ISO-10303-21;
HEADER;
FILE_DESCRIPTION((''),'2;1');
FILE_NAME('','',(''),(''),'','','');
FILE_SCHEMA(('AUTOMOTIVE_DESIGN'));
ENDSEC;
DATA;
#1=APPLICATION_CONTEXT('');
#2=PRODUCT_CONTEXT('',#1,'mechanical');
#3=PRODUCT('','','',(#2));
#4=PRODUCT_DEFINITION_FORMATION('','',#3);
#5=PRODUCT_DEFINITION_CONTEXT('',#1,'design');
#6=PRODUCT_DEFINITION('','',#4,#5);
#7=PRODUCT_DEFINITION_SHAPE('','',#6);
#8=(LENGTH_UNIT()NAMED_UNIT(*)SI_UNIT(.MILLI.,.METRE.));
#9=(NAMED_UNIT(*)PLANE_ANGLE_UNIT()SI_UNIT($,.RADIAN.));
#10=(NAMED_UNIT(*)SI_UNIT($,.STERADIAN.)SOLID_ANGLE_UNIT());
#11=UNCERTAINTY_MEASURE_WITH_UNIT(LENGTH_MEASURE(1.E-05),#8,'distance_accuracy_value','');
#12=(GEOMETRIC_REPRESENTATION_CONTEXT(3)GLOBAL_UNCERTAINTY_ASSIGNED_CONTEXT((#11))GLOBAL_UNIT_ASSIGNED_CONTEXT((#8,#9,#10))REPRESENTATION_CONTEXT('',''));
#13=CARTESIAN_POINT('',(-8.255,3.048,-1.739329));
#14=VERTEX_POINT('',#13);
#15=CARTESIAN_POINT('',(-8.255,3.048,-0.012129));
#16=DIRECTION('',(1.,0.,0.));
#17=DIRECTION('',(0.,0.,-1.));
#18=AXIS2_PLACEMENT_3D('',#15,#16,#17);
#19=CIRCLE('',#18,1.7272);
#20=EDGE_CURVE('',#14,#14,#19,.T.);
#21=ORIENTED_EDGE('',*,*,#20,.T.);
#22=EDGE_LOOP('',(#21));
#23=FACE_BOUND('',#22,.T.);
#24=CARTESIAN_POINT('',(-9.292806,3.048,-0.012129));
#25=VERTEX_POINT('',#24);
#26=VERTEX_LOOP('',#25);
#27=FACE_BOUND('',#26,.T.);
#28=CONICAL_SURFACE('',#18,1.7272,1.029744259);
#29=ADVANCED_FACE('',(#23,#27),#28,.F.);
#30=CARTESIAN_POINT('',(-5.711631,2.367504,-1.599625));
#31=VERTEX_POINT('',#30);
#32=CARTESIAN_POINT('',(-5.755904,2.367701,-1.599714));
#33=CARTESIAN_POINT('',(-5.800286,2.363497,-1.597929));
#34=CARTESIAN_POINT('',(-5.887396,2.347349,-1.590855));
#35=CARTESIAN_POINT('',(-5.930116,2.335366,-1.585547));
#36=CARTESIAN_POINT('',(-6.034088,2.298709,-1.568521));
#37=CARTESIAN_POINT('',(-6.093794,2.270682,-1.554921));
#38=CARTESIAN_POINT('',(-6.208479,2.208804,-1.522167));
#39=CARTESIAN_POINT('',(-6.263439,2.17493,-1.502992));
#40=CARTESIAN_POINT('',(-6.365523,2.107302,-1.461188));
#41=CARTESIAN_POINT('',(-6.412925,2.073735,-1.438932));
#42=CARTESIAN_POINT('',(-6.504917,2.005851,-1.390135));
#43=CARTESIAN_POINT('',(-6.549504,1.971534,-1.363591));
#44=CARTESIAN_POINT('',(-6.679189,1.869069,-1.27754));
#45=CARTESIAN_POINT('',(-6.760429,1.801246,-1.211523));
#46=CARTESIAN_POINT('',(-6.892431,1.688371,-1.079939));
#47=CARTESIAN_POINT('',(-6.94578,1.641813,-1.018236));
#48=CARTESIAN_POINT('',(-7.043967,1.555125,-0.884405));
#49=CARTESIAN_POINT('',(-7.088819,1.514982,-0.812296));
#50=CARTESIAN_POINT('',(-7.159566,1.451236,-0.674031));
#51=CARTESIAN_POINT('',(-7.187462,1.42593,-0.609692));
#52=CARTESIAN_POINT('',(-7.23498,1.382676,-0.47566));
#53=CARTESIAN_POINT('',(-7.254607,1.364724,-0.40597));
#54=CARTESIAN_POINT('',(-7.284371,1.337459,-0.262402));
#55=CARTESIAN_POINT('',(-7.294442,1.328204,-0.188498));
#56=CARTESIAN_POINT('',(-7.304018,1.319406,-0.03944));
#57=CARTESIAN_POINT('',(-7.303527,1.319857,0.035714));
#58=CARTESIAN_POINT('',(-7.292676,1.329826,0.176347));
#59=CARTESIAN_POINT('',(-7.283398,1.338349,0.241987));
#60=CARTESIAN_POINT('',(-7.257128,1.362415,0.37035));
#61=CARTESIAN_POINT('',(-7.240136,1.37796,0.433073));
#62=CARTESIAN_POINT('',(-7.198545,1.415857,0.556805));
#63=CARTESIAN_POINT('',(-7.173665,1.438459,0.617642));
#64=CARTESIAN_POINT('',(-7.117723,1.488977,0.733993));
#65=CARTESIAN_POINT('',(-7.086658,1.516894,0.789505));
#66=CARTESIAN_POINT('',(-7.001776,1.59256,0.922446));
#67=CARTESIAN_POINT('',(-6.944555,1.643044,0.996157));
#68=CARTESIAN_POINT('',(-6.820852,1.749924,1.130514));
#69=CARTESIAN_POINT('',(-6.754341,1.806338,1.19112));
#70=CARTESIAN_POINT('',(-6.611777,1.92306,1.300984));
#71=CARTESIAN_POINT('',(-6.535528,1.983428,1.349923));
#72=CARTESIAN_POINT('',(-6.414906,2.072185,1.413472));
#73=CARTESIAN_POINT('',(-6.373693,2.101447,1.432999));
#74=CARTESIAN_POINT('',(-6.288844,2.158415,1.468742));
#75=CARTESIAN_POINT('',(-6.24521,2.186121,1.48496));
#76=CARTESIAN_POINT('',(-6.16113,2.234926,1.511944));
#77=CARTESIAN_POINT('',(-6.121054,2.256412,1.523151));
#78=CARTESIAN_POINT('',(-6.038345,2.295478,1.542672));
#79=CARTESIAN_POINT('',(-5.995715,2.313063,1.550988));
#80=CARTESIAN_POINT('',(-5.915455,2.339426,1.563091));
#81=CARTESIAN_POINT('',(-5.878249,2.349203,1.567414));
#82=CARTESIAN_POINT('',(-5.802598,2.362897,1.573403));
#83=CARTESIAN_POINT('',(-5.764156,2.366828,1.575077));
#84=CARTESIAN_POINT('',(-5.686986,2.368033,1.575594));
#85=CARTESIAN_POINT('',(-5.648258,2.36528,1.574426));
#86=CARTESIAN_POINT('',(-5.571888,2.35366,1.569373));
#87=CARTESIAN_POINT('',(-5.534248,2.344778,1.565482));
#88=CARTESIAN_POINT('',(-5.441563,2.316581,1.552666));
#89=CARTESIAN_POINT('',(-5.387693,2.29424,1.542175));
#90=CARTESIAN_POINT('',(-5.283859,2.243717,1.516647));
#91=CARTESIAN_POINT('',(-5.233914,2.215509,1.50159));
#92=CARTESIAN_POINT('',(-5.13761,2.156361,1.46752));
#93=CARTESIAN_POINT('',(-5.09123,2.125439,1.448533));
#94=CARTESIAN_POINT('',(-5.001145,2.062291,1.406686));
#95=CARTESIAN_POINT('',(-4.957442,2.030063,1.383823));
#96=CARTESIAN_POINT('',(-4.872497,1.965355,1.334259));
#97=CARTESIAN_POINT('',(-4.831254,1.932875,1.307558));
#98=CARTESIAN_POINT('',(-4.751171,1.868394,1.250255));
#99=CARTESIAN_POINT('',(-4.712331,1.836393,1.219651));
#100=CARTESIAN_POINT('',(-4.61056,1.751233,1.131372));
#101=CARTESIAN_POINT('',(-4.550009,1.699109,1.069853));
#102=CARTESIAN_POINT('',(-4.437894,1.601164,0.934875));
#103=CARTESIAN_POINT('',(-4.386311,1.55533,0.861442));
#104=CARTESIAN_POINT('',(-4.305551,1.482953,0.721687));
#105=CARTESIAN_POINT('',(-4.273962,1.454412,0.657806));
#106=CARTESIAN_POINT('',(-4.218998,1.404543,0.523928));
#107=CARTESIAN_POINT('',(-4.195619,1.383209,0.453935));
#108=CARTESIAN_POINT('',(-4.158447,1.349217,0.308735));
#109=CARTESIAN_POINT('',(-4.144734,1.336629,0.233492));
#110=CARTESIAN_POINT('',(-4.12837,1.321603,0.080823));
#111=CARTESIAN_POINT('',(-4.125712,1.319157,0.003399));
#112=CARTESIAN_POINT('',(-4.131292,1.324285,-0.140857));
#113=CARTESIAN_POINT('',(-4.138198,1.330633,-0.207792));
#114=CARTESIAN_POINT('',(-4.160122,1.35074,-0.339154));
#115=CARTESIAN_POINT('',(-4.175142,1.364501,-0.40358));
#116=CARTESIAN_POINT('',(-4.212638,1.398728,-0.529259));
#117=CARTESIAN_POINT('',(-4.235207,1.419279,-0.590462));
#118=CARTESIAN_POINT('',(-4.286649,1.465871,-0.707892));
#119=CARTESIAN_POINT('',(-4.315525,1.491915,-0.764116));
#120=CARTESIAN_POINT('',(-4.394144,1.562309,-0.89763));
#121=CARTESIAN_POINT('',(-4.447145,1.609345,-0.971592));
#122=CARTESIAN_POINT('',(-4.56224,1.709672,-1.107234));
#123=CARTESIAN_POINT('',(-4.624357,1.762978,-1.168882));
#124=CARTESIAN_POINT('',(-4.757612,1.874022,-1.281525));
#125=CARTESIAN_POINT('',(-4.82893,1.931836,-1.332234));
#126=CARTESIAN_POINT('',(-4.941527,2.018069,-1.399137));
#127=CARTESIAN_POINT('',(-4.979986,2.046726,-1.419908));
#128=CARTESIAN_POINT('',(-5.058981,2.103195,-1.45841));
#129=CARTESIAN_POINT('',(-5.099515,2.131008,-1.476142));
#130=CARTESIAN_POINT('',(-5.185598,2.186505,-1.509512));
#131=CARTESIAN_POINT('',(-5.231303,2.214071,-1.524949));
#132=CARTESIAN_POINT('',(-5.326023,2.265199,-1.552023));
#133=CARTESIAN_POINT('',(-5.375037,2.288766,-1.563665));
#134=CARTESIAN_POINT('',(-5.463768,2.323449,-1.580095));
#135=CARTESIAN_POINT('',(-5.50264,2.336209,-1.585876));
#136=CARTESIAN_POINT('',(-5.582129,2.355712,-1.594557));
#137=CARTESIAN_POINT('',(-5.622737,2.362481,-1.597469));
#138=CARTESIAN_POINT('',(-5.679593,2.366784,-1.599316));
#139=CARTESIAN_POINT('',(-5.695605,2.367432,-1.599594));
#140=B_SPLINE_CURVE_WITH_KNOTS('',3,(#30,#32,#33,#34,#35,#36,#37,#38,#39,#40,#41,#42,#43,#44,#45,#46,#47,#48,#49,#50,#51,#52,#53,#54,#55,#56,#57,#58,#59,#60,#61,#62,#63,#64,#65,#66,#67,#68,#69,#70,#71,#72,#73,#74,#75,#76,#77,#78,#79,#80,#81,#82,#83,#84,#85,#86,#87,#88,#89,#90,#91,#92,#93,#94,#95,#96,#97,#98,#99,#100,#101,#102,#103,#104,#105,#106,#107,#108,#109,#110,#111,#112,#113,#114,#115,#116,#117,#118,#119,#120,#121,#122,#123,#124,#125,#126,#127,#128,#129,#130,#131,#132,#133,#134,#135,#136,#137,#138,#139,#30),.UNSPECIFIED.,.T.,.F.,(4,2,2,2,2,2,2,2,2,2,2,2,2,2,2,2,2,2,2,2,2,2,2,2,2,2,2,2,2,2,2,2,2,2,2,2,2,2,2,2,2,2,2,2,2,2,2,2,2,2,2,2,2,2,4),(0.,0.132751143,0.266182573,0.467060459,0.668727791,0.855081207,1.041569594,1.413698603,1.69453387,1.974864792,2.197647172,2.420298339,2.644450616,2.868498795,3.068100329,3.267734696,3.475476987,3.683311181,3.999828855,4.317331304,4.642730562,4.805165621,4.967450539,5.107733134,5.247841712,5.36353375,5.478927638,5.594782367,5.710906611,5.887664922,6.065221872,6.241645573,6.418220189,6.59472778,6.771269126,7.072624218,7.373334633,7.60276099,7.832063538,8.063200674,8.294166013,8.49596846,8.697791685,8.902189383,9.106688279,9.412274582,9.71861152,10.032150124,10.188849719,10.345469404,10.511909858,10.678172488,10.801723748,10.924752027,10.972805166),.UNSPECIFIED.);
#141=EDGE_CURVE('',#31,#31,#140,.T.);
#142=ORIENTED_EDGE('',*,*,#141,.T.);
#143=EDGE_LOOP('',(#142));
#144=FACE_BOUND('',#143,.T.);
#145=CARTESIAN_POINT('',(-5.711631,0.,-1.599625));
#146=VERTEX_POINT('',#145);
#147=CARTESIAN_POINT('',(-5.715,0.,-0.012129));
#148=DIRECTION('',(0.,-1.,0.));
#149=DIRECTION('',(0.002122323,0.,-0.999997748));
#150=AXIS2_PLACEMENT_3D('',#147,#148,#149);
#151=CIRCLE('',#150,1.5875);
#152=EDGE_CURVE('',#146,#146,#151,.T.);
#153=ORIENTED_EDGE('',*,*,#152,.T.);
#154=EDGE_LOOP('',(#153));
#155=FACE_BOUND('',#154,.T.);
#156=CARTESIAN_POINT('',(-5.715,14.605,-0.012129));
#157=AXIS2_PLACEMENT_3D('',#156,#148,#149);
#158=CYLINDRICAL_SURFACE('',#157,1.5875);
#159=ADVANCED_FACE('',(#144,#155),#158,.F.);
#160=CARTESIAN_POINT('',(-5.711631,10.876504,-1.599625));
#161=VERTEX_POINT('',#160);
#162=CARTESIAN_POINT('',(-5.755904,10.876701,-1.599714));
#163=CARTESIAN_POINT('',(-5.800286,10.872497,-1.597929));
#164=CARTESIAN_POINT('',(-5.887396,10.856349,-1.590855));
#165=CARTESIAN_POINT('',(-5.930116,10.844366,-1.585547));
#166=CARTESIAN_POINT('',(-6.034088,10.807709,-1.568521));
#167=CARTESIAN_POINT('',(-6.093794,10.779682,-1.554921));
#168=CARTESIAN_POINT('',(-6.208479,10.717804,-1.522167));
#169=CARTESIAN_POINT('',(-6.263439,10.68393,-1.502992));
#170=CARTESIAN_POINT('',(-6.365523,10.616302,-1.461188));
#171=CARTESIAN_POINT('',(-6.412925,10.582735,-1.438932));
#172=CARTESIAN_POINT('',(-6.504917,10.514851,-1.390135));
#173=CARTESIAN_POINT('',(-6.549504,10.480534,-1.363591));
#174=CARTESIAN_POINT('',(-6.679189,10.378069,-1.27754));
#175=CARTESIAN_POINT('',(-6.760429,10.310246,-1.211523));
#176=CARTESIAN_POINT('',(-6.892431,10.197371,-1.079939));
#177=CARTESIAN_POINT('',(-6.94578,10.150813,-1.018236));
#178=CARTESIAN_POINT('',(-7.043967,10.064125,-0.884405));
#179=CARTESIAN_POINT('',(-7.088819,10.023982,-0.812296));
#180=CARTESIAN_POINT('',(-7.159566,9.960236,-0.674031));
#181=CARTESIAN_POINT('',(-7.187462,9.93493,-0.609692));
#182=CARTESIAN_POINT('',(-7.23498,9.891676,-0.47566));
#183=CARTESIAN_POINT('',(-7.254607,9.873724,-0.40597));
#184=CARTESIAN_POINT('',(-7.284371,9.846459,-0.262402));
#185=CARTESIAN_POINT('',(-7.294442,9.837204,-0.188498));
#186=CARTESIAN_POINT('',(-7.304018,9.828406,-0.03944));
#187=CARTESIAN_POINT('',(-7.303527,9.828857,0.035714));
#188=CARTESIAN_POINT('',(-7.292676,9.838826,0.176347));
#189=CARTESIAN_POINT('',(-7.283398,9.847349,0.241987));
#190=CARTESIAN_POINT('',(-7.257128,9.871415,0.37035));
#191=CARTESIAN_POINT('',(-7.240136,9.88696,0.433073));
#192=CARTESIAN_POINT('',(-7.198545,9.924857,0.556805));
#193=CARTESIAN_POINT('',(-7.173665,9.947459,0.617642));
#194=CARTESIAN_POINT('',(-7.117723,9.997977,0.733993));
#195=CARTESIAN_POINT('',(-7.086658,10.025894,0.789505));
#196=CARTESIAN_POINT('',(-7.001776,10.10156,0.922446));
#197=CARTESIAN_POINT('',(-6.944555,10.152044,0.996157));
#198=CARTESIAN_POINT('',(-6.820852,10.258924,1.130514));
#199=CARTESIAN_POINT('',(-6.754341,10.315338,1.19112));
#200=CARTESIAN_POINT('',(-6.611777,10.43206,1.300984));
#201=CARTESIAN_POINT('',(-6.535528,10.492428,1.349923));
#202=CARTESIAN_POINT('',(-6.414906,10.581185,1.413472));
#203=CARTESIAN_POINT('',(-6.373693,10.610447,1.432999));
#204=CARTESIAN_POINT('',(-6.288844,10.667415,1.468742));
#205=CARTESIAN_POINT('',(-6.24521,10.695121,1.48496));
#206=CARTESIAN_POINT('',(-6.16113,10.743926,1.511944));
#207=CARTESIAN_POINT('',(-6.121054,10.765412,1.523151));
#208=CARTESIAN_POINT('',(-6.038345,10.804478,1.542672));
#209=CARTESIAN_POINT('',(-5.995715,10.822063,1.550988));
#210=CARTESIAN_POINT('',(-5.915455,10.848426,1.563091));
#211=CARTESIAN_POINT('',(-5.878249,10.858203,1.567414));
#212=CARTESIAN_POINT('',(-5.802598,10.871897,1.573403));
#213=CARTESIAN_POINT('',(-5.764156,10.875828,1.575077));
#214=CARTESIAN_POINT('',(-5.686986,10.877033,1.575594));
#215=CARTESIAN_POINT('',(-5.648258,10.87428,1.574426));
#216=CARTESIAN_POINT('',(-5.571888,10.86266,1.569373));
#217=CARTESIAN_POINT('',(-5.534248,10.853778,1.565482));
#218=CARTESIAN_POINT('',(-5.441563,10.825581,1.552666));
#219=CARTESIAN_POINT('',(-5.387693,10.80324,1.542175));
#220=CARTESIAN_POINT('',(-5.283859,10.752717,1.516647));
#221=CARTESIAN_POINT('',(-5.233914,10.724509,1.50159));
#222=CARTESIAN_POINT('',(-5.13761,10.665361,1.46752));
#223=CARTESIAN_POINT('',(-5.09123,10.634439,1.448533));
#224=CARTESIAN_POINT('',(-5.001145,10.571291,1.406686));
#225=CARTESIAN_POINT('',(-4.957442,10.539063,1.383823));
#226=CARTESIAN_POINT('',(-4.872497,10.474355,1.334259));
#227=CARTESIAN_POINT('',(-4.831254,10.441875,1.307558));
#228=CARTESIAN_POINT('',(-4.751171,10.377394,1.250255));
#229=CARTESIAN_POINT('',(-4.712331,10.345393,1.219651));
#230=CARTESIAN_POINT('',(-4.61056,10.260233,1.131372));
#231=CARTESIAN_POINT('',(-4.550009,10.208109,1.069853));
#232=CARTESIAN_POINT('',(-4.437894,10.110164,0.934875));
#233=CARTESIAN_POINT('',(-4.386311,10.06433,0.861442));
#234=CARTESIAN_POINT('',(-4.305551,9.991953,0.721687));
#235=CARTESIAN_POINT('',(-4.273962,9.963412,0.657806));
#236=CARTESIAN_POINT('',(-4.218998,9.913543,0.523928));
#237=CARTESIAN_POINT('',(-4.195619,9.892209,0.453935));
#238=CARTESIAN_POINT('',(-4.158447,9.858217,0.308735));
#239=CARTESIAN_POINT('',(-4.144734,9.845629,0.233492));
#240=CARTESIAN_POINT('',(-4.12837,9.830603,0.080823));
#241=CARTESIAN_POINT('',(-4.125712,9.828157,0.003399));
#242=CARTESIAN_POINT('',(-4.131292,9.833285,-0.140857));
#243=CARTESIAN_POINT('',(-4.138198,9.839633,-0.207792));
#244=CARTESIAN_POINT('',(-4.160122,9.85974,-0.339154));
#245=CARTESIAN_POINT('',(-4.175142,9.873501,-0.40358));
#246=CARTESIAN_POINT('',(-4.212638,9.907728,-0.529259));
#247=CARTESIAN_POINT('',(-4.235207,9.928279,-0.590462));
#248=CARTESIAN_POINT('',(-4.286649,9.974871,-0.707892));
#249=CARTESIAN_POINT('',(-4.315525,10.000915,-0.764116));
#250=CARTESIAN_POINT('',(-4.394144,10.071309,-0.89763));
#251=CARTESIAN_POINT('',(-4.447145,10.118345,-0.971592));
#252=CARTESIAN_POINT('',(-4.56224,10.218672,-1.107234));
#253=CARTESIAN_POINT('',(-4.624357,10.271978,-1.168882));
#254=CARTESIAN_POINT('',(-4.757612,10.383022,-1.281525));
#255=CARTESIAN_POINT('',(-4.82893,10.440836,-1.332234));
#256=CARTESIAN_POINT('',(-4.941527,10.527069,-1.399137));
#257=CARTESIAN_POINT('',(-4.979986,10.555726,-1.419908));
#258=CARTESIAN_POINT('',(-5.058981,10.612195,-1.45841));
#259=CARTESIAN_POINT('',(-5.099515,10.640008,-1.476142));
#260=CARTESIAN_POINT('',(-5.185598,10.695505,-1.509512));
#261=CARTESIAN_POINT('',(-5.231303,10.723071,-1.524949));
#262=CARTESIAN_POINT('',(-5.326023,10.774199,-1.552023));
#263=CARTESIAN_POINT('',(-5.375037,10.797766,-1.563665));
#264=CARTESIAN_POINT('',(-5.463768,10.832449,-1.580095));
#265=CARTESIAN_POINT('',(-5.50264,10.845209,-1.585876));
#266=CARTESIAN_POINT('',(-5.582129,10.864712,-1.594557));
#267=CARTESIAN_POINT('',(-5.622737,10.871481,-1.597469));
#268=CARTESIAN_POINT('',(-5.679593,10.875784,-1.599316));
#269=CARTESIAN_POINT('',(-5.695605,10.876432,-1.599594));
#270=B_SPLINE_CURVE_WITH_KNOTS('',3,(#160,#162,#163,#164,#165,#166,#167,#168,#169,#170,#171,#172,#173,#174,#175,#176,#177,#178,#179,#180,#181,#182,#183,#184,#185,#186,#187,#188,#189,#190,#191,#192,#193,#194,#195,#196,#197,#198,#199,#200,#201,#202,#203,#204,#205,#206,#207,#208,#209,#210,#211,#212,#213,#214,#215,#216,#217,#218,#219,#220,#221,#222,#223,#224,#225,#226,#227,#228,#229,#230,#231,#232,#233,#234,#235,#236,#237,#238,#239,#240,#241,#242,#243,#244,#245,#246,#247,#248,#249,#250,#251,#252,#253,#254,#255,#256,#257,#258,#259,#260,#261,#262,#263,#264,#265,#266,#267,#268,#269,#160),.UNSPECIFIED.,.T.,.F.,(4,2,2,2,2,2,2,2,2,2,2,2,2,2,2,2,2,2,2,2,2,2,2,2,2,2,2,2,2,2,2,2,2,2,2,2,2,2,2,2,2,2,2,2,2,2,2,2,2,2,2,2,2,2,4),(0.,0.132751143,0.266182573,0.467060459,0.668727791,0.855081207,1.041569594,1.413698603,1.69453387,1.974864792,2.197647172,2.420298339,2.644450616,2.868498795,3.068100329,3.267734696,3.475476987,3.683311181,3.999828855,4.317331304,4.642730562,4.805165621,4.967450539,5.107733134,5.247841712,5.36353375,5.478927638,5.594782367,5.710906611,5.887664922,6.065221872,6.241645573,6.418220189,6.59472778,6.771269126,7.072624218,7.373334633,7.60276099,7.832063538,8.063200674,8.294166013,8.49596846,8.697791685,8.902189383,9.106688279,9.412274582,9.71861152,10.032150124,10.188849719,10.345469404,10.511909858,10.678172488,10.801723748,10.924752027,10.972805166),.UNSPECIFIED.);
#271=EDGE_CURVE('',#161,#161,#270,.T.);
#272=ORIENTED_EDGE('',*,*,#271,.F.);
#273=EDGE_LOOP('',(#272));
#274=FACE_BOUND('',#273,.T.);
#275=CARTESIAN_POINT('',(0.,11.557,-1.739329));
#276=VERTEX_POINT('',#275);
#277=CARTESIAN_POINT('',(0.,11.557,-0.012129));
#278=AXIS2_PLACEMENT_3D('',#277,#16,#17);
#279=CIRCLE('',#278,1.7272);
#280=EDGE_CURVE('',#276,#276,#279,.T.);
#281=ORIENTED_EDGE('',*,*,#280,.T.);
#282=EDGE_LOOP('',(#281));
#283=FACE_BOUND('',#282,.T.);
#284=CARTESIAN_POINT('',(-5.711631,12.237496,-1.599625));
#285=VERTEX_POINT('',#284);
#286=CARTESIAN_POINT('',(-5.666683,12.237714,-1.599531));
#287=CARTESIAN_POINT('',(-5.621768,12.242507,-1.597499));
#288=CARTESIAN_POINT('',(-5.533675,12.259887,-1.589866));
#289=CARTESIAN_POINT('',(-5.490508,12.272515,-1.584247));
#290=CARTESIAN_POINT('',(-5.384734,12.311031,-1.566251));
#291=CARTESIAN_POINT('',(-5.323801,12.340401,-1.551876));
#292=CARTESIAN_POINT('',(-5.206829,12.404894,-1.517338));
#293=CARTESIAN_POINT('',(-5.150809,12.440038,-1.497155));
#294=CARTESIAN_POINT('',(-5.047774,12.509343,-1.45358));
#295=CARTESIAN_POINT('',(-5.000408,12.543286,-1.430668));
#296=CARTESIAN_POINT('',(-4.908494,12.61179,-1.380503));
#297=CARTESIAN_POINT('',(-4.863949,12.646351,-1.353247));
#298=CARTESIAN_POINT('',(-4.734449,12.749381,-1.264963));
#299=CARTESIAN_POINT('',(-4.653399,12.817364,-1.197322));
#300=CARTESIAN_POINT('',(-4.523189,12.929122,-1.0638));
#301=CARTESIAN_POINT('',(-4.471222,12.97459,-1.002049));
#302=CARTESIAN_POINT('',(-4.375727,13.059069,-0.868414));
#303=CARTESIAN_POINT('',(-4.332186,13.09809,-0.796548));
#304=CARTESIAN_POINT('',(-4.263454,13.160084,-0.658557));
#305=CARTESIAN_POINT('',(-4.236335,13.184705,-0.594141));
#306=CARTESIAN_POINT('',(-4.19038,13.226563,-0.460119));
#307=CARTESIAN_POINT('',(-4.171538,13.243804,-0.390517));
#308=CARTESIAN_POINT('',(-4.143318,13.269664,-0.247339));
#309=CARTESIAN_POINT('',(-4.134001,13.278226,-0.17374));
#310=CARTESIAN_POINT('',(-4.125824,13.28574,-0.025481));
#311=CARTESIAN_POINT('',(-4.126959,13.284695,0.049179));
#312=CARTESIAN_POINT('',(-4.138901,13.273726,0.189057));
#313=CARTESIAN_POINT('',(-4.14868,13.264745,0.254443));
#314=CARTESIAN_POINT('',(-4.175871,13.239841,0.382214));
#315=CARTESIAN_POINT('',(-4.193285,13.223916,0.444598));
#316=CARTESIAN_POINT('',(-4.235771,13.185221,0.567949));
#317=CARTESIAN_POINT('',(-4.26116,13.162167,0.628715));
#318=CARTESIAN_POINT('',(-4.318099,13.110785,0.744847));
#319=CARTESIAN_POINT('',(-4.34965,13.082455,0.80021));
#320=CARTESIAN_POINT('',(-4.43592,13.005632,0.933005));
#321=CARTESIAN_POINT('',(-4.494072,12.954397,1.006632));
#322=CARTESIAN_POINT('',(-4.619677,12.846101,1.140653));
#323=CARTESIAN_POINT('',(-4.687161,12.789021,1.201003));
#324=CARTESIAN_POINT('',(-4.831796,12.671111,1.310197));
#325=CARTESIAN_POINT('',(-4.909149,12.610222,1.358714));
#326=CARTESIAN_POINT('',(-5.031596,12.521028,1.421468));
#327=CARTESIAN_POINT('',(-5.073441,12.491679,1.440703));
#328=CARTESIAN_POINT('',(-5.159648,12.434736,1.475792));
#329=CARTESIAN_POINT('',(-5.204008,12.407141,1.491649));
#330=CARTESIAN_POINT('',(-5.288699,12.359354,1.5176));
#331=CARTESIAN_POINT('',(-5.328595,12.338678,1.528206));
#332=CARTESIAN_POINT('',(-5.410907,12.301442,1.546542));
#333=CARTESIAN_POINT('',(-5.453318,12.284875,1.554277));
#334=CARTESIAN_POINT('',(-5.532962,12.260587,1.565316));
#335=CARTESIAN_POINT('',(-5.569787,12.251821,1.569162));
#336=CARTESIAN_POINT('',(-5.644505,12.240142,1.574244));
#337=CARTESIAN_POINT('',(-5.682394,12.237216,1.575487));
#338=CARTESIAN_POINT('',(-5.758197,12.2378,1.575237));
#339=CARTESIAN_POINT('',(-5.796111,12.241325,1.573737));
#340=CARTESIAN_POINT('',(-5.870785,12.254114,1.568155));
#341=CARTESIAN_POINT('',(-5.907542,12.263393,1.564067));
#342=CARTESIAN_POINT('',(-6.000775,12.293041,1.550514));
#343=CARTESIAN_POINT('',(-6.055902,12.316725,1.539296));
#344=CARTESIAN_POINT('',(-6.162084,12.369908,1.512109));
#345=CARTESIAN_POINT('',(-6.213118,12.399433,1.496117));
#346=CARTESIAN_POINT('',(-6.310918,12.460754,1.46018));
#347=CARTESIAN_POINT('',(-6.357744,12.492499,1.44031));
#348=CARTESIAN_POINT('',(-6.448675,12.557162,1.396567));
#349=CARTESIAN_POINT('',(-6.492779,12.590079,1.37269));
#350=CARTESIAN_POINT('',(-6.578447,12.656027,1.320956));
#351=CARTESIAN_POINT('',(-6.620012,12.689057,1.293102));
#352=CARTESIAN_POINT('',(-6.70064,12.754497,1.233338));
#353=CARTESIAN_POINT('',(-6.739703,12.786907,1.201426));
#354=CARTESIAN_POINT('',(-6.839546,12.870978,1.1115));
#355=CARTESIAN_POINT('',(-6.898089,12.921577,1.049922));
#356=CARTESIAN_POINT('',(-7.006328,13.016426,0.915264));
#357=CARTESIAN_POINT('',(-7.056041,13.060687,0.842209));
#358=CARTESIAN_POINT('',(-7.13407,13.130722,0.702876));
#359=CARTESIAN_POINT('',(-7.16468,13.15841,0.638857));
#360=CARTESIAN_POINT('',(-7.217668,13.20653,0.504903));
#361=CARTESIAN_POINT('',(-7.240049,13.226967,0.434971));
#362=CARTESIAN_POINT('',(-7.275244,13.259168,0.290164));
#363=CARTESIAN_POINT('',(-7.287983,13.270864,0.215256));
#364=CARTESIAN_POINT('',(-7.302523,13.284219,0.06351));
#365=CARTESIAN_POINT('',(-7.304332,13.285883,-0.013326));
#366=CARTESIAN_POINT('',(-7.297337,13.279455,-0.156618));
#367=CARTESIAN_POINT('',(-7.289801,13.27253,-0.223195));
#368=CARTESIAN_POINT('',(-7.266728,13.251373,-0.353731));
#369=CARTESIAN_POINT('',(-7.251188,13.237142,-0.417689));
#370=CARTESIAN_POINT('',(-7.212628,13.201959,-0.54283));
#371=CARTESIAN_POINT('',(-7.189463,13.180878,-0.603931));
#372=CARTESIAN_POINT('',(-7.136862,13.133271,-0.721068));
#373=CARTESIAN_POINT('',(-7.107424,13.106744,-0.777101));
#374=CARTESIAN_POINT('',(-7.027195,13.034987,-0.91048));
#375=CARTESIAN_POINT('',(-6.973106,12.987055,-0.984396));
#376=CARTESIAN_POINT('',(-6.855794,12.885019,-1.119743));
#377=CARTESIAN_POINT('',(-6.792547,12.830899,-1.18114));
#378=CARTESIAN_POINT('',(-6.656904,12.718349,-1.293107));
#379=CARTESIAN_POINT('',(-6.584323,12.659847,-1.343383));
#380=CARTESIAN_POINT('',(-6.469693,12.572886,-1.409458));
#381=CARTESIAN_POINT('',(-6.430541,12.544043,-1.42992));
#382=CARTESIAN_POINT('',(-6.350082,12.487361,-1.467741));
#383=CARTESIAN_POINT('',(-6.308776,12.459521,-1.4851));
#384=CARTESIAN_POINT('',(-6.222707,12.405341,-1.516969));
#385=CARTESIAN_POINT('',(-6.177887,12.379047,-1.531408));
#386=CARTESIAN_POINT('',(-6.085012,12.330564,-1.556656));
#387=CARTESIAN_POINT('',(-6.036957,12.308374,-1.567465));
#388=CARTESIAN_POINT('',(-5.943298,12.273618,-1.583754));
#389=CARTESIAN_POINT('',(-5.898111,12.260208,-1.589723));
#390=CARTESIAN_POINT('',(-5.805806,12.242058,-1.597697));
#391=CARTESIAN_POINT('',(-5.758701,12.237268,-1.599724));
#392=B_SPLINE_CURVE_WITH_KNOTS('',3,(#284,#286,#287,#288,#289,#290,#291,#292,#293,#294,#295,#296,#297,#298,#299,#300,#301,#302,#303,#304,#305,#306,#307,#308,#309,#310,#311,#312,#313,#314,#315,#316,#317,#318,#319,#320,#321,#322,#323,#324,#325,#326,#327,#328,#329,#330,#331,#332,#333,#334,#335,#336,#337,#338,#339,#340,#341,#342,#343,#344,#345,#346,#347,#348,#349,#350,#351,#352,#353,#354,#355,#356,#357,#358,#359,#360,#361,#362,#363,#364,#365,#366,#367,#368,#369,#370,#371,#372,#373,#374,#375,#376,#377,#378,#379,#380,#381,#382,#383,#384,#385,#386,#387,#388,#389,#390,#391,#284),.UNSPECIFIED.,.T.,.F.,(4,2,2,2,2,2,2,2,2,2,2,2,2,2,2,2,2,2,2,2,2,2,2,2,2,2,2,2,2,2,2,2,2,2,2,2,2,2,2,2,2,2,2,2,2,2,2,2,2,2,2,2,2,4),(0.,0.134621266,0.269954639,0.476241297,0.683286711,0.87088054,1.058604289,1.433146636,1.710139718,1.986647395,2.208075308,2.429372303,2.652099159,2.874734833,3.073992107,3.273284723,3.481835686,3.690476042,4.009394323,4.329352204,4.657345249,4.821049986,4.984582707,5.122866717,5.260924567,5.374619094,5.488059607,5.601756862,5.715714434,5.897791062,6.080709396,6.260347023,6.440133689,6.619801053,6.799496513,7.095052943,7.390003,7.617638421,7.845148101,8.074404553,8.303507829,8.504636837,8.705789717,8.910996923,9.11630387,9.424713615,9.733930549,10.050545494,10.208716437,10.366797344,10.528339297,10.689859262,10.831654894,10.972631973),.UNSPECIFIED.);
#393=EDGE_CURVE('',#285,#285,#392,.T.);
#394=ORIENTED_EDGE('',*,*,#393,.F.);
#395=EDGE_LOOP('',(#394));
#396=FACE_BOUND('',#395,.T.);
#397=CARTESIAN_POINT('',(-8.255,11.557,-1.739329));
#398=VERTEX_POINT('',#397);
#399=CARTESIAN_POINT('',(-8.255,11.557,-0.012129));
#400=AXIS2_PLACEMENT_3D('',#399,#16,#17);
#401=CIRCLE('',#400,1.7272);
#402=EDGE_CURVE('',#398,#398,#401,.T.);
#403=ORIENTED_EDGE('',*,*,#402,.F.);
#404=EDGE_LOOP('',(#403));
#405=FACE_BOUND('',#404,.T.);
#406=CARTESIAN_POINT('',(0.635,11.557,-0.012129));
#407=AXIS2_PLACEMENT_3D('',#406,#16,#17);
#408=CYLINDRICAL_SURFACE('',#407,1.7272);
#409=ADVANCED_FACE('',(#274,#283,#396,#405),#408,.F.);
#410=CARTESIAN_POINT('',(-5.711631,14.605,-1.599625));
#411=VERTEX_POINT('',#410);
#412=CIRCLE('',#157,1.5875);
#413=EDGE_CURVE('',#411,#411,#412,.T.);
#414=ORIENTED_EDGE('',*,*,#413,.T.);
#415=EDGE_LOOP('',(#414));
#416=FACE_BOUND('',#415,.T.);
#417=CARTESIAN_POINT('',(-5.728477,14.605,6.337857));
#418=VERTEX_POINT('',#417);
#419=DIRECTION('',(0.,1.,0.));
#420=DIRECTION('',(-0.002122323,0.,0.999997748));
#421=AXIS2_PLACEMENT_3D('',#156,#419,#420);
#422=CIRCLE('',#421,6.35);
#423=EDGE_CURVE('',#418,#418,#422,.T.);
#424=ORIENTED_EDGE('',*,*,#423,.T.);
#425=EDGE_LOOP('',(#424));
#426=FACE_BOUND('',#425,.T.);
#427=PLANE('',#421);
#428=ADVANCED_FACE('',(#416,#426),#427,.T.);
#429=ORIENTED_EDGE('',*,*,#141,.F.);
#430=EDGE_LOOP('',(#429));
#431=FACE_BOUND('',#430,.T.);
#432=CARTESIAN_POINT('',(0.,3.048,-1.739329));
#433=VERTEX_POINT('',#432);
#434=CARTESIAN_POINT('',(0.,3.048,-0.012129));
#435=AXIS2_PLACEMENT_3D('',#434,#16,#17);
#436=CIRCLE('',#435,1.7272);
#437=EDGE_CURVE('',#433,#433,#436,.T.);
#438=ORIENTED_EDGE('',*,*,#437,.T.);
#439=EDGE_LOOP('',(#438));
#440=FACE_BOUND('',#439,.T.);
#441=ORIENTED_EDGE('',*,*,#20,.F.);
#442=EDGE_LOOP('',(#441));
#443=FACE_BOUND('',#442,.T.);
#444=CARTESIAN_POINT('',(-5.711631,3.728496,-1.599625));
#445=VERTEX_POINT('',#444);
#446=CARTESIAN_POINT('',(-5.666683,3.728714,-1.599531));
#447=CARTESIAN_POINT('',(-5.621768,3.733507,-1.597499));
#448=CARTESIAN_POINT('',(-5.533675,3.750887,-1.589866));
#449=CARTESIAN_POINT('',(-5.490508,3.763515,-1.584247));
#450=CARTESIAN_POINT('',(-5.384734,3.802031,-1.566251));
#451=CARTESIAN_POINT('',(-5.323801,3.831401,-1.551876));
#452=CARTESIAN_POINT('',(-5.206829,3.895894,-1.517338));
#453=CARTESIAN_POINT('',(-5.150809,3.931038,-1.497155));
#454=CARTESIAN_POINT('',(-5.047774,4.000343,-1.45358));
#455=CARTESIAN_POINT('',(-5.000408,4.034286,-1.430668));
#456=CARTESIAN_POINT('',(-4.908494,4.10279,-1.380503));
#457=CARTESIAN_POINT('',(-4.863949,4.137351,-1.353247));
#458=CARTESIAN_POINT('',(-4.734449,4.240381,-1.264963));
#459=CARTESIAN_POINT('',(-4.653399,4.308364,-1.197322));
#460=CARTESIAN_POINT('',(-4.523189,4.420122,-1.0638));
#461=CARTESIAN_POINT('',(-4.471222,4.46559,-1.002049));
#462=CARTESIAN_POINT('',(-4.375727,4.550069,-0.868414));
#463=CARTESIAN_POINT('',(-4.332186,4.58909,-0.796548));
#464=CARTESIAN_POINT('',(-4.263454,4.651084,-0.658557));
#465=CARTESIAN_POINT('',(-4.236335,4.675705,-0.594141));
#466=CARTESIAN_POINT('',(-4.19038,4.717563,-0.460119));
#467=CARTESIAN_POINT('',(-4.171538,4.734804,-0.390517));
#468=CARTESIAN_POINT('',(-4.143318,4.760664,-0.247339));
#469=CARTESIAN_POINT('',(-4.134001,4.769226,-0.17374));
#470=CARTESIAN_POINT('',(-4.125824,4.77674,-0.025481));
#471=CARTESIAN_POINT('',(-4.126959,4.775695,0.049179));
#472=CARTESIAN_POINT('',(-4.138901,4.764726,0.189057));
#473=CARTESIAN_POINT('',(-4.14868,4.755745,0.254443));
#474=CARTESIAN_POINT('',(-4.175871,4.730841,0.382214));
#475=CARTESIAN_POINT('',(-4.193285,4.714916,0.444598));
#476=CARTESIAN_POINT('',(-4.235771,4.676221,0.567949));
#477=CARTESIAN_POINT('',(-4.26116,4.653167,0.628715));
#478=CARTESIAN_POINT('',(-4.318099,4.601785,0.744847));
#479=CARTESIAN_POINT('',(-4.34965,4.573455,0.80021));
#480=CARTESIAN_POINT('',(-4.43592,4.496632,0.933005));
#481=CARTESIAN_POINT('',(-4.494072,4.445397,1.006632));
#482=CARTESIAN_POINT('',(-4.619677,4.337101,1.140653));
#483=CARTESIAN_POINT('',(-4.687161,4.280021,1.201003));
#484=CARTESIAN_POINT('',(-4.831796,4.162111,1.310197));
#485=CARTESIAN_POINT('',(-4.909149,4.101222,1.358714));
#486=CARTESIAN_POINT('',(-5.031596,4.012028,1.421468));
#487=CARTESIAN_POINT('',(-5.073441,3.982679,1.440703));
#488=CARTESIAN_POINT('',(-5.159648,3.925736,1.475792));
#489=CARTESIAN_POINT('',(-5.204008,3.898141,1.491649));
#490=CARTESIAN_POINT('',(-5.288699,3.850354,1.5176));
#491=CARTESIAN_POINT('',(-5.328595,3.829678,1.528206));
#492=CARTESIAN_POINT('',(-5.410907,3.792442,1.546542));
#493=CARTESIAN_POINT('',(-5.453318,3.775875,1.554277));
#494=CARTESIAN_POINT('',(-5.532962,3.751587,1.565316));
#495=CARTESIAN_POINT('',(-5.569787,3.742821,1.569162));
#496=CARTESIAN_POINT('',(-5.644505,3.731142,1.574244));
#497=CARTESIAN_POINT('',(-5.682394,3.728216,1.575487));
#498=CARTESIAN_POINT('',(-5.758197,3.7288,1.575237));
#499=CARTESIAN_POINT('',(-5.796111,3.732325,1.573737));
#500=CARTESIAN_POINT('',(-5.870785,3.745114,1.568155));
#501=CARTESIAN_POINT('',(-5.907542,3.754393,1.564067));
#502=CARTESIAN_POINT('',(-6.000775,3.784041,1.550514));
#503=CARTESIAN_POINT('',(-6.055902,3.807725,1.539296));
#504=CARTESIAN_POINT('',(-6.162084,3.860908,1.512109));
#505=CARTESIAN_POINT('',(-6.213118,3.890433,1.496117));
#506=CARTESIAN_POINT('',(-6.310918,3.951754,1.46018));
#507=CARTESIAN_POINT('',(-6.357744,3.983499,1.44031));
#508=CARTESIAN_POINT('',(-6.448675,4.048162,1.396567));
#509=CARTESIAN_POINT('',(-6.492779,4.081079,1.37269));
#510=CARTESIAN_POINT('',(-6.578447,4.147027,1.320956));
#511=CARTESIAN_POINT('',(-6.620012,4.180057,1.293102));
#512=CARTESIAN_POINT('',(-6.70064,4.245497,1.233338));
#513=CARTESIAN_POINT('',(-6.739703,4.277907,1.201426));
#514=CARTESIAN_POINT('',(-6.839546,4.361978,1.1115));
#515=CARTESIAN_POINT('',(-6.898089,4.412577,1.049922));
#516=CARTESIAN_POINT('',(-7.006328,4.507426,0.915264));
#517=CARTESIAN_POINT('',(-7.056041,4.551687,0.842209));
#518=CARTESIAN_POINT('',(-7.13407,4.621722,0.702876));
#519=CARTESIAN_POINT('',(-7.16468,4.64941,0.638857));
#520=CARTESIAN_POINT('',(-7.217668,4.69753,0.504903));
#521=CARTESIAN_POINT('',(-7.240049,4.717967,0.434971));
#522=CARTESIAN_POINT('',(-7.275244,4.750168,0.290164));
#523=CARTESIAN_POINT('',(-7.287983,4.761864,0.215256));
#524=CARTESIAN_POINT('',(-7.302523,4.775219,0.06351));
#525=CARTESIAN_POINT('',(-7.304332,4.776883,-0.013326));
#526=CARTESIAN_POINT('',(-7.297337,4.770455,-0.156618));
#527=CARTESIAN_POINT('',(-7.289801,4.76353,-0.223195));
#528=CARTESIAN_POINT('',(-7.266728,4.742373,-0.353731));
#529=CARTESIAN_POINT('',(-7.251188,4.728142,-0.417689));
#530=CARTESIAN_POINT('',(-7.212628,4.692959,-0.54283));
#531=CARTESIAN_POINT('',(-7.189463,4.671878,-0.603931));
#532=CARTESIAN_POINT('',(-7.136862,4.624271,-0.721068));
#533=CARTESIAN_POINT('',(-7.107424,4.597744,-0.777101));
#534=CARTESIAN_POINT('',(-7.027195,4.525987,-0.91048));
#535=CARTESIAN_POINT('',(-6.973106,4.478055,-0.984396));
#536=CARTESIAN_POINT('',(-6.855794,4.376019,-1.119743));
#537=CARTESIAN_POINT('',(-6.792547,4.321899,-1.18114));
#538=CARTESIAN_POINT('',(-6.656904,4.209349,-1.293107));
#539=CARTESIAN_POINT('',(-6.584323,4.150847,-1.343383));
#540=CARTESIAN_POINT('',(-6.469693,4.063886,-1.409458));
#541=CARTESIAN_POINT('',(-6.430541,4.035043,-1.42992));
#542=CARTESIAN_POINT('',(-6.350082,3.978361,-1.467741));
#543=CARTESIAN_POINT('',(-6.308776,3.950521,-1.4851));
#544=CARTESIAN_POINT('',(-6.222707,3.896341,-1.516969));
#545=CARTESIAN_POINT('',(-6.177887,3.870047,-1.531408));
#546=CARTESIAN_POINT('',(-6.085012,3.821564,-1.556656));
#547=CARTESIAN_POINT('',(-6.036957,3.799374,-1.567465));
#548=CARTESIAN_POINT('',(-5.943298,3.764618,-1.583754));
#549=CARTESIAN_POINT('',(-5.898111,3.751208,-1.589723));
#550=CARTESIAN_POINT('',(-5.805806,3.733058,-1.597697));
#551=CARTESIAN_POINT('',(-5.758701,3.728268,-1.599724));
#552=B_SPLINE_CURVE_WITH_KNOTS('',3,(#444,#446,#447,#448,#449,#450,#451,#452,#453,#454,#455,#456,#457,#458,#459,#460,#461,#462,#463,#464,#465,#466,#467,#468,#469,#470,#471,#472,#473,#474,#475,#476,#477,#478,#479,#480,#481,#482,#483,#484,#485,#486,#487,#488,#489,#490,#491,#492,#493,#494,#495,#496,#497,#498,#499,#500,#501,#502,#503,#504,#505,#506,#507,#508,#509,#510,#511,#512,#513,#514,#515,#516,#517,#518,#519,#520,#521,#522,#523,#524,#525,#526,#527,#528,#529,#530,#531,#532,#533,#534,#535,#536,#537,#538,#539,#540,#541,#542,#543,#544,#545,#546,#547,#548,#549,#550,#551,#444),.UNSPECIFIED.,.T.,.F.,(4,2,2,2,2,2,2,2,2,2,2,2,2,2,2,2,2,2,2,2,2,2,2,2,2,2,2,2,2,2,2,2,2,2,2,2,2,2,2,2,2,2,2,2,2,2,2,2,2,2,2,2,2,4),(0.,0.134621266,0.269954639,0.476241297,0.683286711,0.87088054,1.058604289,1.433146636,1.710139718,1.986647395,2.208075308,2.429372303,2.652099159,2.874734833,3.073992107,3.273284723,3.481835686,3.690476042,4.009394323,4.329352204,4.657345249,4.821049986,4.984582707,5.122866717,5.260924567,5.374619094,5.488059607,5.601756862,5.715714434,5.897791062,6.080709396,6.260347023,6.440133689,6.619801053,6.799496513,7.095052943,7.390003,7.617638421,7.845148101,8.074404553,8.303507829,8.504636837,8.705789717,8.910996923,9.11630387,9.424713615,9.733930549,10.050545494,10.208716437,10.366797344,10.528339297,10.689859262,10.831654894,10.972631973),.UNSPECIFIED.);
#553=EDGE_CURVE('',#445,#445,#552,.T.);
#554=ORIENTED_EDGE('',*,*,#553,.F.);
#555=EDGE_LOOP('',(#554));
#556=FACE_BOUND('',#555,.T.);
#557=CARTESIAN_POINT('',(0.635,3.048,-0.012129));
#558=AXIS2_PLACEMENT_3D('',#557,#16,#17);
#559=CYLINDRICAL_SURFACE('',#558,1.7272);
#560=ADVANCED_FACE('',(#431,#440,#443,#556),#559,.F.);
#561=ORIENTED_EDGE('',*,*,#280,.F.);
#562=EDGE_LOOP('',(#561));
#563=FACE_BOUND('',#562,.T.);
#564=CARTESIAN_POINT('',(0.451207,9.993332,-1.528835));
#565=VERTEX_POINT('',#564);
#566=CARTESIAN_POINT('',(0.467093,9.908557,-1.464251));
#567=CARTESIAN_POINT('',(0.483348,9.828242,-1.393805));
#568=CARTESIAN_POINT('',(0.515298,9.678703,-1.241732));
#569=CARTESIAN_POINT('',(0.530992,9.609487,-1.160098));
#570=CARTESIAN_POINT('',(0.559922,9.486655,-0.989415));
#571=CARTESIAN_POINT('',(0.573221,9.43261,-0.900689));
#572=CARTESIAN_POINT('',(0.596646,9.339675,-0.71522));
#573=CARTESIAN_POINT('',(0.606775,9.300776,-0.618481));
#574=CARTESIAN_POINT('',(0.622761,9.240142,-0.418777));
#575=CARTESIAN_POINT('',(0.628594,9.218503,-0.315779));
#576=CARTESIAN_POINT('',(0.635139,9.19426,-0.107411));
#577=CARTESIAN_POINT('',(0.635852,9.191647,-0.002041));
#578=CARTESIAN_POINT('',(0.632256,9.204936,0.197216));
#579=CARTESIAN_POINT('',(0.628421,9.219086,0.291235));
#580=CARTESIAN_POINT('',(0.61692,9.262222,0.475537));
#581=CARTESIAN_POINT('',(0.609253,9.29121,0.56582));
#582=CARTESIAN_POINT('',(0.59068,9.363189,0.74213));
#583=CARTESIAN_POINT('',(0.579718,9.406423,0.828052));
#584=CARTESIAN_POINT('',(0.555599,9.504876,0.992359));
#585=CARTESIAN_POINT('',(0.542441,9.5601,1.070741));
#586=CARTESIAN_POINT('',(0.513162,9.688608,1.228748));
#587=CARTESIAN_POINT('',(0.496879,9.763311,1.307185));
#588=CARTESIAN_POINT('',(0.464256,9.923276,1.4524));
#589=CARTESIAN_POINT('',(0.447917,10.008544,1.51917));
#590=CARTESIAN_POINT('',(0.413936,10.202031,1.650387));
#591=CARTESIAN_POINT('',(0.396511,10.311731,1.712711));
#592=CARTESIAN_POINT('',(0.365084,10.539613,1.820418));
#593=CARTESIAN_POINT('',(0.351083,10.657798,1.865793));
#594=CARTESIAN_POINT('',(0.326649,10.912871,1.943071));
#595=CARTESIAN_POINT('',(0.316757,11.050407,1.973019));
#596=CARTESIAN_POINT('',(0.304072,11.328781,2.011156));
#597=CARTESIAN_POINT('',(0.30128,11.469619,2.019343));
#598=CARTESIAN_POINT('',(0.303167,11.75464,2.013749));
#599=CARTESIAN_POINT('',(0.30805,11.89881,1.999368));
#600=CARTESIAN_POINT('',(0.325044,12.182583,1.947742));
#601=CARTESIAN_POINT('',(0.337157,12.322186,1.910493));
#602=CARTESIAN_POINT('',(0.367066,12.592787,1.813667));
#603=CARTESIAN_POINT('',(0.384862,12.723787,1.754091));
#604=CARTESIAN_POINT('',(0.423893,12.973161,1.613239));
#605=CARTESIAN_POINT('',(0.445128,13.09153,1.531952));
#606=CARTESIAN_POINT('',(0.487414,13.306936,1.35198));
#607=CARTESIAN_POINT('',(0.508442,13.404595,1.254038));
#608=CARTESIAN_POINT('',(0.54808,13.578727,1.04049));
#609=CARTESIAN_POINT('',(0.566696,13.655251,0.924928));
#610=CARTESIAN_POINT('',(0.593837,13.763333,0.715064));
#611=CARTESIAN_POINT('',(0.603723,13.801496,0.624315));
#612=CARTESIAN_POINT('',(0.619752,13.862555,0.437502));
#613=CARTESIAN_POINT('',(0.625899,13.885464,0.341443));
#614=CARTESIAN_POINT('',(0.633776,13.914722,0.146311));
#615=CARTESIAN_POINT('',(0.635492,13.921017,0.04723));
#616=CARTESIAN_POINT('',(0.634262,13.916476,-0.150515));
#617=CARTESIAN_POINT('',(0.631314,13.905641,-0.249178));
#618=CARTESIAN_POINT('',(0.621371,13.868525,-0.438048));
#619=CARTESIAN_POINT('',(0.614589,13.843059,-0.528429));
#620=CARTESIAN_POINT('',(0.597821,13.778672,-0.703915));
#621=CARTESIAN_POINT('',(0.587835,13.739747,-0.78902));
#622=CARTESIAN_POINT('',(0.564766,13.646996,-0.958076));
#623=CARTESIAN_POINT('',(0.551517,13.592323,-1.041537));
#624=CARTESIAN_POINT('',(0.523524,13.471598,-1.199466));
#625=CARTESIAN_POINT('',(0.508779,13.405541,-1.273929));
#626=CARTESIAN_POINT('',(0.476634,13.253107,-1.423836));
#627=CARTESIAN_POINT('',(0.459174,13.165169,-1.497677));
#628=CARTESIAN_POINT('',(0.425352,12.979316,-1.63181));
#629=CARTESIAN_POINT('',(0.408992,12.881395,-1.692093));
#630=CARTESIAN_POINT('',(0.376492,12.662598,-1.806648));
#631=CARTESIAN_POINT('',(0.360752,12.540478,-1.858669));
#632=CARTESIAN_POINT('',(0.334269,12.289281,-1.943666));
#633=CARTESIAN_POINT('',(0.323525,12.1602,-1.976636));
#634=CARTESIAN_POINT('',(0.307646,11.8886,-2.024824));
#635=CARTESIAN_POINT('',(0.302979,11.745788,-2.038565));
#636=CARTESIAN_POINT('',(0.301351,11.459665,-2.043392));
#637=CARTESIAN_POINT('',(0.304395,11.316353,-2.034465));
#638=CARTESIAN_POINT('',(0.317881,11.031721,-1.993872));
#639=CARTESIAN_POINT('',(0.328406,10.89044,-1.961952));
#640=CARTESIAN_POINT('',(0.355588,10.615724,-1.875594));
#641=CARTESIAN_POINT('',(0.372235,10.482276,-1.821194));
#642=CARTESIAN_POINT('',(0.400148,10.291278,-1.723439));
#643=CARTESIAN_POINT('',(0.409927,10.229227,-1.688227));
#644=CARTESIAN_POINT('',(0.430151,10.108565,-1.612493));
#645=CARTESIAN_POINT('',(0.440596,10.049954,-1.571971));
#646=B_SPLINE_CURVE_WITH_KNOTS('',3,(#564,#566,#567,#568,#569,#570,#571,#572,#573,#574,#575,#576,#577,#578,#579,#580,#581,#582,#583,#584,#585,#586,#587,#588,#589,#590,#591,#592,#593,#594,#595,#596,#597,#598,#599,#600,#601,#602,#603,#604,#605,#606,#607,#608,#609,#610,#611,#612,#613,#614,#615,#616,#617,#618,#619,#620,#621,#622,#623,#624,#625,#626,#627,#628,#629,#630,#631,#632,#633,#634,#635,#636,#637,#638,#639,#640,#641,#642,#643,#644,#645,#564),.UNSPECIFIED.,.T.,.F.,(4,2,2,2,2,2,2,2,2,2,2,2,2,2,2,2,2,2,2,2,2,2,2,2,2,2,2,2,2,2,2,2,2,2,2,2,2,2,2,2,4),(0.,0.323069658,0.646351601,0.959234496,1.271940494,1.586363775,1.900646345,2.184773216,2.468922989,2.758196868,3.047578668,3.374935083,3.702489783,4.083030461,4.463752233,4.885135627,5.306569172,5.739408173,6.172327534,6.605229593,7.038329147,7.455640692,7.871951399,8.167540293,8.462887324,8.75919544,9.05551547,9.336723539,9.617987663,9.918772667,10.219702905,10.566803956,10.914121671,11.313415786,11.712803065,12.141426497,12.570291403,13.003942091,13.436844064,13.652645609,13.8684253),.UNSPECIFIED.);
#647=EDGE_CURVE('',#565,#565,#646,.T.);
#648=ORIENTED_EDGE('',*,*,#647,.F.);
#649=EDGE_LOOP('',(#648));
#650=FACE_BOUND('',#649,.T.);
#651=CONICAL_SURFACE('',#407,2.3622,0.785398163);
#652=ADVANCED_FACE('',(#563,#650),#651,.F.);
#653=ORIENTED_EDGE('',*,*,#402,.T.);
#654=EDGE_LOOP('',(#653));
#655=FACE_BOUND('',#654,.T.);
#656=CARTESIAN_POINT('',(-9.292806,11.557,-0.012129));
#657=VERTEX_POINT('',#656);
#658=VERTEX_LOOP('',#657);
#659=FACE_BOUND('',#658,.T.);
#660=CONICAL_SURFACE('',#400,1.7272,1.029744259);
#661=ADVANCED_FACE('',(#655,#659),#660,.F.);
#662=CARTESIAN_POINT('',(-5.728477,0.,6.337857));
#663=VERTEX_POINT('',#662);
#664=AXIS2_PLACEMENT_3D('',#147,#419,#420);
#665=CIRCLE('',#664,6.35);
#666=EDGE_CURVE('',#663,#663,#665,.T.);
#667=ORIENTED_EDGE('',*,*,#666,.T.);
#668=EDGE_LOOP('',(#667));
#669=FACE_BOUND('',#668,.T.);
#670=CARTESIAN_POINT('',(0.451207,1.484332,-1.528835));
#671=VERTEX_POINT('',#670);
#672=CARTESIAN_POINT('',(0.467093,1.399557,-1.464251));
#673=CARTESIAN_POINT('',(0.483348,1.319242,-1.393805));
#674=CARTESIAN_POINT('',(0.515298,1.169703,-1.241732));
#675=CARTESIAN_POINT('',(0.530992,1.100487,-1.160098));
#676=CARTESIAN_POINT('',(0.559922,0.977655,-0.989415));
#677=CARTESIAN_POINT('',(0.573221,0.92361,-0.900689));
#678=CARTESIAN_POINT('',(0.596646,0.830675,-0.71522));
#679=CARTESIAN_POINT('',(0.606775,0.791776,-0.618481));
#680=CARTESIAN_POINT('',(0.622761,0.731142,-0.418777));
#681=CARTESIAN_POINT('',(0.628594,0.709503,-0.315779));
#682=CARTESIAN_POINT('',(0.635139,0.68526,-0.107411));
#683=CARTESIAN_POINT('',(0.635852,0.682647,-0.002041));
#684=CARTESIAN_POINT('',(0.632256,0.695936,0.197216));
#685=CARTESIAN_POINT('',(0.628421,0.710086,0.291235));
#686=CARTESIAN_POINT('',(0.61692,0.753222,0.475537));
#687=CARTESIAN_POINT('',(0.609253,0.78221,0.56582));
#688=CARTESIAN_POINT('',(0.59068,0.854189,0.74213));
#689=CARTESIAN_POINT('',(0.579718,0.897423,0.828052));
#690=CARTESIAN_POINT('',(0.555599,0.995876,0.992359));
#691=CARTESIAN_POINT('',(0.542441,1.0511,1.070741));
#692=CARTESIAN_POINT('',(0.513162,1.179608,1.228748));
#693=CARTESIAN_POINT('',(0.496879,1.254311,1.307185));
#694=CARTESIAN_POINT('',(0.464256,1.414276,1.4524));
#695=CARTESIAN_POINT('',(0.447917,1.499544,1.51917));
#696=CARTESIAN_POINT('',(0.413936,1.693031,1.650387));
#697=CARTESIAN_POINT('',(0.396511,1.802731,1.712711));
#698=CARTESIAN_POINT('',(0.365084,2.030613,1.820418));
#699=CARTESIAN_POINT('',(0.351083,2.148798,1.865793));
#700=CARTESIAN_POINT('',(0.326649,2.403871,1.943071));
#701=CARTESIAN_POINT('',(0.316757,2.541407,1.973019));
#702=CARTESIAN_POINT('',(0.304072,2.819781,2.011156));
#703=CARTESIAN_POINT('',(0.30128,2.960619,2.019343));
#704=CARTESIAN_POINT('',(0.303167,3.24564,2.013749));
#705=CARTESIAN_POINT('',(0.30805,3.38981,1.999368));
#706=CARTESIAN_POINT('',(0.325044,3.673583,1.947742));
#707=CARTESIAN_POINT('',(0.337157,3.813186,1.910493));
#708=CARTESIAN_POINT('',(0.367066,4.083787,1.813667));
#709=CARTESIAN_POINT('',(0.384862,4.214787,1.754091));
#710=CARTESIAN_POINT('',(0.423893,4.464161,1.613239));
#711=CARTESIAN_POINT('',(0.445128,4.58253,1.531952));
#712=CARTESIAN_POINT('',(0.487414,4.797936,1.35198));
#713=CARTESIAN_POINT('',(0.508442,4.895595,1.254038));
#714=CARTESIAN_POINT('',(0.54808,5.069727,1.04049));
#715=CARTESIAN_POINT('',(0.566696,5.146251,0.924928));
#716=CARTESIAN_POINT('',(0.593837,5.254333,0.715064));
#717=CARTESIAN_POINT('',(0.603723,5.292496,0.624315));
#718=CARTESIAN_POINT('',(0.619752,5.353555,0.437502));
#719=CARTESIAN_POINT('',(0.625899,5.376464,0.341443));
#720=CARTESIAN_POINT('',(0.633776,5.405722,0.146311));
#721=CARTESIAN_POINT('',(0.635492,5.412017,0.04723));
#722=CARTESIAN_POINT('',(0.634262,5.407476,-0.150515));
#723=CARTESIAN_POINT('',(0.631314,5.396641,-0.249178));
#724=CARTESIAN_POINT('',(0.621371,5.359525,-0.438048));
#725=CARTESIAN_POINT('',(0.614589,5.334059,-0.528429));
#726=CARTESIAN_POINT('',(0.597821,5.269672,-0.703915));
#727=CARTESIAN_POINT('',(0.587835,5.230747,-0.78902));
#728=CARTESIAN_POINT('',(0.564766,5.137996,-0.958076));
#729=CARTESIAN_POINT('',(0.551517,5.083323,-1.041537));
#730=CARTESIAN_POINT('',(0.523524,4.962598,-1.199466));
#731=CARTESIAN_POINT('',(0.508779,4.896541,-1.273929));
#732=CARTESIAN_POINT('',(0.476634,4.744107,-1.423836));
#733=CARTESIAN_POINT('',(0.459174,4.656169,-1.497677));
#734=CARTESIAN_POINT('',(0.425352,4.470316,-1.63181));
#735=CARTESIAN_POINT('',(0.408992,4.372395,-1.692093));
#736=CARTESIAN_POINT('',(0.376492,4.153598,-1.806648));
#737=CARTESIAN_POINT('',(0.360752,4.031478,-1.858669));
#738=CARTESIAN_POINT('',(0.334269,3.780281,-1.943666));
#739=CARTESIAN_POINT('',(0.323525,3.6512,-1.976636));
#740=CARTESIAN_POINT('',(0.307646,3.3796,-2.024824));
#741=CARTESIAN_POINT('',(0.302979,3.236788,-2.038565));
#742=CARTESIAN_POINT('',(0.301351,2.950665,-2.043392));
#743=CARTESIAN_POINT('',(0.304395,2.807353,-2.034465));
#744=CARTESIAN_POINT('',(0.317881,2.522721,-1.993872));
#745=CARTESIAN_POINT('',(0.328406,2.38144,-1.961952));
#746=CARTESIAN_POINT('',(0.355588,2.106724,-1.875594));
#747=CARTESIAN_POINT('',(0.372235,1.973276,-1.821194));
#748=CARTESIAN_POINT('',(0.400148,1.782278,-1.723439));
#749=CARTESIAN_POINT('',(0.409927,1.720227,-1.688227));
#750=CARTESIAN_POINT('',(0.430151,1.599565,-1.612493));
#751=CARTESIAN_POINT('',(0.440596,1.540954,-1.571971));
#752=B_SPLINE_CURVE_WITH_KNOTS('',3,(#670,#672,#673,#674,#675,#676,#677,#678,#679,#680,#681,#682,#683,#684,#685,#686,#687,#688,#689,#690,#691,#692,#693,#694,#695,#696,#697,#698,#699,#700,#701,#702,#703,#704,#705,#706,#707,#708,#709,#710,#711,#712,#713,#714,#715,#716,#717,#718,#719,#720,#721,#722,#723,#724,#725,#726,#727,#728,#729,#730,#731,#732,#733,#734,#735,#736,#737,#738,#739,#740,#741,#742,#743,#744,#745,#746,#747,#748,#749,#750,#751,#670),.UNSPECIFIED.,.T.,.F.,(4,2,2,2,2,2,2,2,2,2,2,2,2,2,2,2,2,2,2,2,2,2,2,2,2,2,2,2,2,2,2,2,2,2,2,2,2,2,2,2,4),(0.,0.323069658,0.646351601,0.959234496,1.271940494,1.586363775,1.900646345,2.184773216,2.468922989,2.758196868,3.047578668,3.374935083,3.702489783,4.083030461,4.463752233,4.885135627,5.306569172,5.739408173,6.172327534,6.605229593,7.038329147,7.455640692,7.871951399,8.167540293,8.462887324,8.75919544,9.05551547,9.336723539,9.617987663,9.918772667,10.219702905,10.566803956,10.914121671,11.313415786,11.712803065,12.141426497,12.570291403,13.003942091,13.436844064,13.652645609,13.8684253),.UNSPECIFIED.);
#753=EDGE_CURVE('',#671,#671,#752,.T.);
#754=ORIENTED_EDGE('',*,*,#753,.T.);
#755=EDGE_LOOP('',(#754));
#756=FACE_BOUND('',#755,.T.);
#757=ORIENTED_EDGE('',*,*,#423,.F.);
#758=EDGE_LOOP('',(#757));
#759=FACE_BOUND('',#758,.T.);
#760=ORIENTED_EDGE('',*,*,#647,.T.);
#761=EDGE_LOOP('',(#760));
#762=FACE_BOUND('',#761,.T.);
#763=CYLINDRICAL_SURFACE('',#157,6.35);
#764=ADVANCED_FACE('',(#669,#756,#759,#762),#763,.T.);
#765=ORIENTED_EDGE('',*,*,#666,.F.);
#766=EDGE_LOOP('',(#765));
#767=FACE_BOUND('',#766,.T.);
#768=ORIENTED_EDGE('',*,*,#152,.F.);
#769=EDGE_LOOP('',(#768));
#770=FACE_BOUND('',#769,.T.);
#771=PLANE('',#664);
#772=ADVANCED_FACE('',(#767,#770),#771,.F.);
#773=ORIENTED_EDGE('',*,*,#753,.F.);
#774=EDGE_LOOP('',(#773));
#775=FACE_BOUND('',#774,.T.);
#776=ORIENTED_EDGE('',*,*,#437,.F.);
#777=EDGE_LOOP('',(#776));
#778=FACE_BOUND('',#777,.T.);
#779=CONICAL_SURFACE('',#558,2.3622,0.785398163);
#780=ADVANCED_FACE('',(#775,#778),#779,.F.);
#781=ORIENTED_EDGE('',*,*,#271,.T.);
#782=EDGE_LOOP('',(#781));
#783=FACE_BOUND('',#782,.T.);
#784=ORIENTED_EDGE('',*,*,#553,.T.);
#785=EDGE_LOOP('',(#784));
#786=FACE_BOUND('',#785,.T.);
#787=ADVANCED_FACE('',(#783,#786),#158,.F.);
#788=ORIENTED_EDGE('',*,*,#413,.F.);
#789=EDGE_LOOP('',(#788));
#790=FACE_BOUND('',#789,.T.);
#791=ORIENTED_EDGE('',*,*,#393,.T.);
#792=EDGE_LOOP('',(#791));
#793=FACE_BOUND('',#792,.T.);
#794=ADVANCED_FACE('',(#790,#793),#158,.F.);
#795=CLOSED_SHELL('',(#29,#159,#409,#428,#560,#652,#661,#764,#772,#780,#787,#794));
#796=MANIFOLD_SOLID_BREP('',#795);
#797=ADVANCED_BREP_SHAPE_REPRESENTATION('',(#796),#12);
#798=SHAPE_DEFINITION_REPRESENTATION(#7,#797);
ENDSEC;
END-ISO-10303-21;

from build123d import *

# Parameters (mm, degrees)
SKETCH1_R             = 6.35
BOSS_EXTRUDE1_DEPTH   = 14.605
SKETCH2_R             = 1.5875
CUT_EXTRUDE1_DEPTH    = 18.145
BODY_MOVE_COPY3_ANGLE = 0.1216002


with BuildPart() as part:
    # Sketch1 → Boss-Extrude1 (new body)
    with BuildSketch(Plane(origin=(0, 0, 0), x_dir=(1, 0, 0), z_dir=(0, 1, 0))):
        with Locations(Location((0, 0, 0), (0, 0, 90))):
            Circle(SKETCH1_R)
    extrude(amount=BOSS_EXTRUDE1_DEPTH)

    # Sketch2 → Cut-Extrude1 (cut, through all)
    with BuildSketch(Plane(origin=(0, 0, 0), x_dir=(-1, 0, 0), z_dir=(0, -1, 0))):
        with Locations(Location((0, 0, 0), (0, 0, 90))):
            Circle(SKETCH2_R)
    extrude(amount=-CUT_EXTRUDE1_DEPTH, mode=Mode.SUBTRACT)

    # Sketch16 → #8-32 Tapped Hole3 (revolve, cut)
    with BuildSketch(Plane(origin=(6.349985699, 3.048, -0.013476749), x_dir=(-0.002122322633644313, 0, -0.9999977478707834), z_dir=(0, 1, 0))):
        Polygon((0, 0), (0, 9.927806461), (1.7272, 8.89), (1.7272, 0.635), (2.3622, 0), align=None)
    f_8_32_tapped_hole3 = revolve(axis=Axis((12.699971398, 3.048, -0.026953497), (-0.9999977478707834, 0, 0.002122322633644313)), mode=Mode.SUBTRACT)

    # Mirror2: #8-32 Tapped Hole3 across plane
    add(f_8_32_tapped_hole3.mirror(Plane.ZX.offset(7.3025)), mode=Mode.SUBTRACT)


with BuildPart() as part_1:
    # Body-Move/Copy3: read off the stored shape, not the designer's step
    # Body-Move/Copy3: moved
    add(part.part.moved(Location((-5.7150129, 0, 0))).rotate(Axis((0, 0, 0), (0, -1, 0)), BODY_MOVE_COPY3_ANGLE))


solid = part_1.part
